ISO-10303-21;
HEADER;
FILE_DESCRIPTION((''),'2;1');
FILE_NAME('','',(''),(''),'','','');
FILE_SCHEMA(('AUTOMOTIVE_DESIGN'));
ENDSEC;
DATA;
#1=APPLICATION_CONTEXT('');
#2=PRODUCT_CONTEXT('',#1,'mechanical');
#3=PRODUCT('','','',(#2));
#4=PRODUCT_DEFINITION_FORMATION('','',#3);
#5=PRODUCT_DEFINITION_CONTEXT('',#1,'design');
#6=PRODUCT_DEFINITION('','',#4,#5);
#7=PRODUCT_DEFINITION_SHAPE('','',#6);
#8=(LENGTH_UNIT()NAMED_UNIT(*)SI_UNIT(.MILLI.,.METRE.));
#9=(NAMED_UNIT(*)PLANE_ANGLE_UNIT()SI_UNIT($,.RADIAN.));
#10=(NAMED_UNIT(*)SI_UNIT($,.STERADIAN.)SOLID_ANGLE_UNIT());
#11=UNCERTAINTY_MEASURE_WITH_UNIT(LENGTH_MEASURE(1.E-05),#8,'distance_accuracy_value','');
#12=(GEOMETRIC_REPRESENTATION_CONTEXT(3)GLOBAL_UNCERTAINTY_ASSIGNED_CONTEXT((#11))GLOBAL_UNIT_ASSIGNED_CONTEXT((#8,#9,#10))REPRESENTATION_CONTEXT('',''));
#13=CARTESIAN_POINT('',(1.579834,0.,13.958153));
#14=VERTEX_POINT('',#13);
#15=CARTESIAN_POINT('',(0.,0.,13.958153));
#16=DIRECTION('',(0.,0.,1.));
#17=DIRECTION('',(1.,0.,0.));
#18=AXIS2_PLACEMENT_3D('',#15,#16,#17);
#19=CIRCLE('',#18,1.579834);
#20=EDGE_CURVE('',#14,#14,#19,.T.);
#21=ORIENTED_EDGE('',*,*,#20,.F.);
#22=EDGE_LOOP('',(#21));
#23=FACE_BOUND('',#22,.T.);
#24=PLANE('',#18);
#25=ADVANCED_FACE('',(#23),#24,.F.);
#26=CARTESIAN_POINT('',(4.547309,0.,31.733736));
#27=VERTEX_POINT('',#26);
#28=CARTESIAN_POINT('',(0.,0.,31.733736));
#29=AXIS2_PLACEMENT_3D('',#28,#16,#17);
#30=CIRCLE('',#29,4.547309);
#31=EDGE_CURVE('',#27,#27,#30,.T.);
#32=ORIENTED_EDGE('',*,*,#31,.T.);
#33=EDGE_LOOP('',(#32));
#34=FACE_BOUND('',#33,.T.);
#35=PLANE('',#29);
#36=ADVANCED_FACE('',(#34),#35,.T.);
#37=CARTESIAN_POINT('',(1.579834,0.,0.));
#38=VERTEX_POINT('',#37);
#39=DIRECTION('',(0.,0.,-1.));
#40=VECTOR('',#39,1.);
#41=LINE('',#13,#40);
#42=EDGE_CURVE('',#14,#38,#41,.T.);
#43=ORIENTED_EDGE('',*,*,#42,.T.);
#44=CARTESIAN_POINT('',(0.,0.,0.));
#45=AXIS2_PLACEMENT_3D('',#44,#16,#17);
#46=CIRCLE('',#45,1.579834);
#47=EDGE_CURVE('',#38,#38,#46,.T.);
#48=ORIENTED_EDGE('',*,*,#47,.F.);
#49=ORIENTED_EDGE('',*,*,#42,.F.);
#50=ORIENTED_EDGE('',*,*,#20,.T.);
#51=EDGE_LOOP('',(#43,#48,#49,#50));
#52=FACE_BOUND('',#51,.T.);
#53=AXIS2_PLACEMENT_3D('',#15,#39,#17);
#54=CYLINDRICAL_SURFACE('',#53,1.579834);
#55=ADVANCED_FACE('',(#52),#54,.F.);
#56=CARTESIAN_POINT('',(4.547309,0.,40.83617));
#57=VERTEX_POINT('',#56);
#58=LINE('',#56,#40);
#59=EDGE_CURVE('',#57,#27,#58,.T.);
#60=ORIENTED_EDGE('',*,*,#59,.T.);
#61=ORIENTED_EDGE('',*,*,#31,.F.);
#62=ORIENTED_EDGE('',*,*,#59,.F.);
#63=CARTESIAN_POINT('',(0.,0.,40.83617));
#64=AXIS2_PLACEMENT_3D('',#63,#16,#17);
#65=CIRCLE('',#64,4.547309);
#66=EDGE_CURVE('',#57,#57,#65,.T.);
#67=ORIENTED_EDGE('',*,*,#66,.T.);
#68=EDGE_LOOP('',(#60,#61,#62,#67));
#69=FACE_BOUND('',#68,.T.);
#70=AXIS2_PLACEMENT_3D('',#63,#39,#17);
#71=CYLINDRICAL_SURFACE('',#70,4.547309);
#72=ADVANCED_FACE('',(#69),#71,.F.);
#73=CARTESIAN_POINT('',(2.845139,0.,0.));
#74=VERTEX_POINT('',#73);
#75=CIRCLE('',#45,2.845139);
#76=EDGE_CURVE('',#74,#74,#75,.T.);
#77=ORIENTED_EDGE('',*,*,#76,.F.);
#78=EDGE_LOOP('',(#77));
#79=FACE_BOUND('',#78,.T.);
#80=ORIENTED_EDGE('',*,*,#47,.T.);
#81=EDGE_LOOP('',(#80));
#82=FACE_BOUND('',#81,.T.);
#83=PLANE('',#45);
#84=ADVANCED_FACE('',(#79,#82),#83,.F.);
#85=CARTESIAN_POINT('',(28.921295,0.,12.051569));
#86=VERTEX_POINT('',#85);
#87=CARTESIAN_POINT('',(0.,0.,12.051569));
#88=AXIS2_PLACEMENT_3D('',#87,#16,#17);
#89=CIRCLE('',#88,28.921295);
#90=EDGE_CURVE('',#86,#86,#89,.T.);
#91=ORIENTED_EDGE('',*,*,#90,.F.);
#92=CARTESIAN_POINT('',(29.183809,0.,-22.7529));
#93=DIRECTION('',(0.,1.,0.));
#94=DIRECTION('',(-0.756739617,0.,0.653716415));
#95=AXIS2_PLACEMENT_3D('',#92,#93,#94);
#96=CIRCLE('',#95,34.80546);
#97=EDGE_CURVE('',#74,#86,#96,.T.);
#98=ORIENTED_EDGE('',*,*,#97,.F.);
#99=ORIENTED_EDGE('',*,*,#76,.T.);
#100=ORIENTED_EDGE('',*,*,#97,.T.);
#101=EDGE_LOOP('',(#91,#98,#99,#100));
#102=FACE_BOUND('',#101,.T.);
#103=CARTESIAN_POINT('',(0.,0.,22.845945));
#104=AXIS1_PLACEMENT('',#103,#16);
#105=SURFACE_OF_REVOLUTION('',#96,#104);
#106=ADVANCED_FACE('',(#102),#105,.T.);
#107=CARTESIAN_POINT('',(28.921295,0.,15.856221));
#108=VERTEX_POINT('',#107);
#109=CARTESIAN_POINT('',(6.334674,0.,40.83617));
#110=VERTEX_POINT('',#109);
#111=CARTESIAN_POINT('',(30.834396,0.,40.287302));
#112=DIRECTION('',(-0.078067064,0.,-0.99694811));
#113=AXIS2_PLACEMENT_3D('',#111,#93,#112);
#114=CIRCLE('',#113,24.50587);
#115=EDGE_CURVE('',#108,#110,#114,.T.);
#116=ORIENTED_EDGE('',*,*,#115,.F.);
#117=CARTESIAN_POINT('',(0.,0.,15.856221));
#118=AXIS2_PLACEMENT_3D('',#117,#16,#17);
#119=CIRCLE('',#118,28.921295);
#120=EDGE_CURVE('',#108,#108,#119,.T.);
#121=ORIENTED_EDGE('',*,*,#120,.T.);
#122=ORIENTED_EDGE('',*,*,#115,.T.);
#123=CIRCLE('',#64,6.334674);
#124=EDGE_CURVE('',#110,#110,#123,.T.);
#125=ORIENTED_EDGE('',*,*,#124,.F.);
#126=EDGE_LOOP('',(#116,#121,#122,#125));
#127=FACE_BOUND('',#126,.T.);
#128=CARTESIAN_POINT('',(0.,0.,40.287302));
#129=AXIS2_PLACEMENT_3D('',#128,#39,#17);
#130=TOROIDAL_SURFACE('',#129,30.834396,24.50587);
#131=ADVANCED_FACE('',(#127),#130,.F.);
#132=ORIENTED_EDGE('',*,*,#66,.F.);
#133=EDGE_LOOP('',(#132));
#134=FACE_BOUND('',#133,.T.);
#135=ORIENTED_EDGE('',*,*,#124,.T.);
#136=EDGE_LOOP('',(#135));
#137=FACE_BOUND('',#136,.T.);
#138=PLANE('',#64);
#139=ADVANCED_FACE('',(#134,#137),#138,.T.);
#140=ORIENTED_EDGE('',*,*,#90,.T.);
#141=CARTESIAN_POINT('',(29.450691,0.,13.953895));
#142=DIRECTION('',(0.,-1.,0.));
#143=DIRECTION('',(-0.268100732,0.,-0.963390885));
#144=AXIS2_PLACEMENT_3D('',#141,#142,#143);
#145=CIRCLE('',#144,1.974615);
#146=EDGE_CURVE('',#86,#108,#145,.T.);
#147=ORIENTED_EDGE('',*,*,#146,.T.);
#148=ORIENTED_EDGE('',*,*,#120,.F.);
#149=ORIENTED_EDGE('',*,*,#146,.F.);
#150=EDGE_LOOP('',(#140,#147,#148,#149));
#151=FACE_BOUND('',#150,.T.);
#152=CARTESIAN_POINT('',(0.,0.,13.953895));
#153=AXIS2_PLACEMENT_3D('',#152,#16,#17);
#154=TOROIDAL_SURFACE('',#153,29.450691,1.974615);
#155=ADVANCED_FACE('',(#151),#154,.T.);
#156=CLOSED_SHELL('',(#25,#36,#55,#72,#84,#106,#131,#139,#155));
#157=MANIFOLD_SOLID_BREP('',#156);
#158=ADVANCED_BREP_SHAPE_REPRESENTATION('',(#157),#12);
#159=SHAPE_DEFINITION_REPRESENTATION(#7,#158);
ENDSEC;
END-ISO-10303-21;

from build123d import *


# Not quite as in the source:
# - a feature names something its author has since deleted; it is built from what else it names


with BuildPart() as f1:
    # F0 (on Front) → F1 (revolve)
    with BuildSketch(Plane.XZ):
        with BuildLine():
            Line((1.579833799, 13.9581533149), (1.579833799, 0))
            Line((1.579833799, 0), (2.8451390099, 0))
            ThreePointArc((2.8451390099, 0), (14.581897199, 8.8414692128), (28.9212949574, 12.0515692979))
            ThreePointArc((28.9212949574, 12.0515692979), (31.4253055765, 13.9538953081), (28.9212949574, 15.8562213182))
            ThreePointArc((28.9212949574, 15.8562213182), (12.6572464777, 23.8517040301), (6.334674079, 40.8361703157))
            Line((6.334674079, 40.8361703157), (4.5473091304, 40.8361703157))
            Line((4.5473091304, 40.8361703157), (4.5473091304, 31.7337363958))
            Line((4.5473091304, 31.7337363958), (0, 31.7337363958))
            Line((0, 31.7337363958), (0, 13.9581533149))
            Line((0, 13.9581533149), (1.579833799, 13.9581533149))
        make_face()
    revolve(axis=Axis((0, 0, 22.8459448554), (0, 0, 1)))


solid = f1.part
